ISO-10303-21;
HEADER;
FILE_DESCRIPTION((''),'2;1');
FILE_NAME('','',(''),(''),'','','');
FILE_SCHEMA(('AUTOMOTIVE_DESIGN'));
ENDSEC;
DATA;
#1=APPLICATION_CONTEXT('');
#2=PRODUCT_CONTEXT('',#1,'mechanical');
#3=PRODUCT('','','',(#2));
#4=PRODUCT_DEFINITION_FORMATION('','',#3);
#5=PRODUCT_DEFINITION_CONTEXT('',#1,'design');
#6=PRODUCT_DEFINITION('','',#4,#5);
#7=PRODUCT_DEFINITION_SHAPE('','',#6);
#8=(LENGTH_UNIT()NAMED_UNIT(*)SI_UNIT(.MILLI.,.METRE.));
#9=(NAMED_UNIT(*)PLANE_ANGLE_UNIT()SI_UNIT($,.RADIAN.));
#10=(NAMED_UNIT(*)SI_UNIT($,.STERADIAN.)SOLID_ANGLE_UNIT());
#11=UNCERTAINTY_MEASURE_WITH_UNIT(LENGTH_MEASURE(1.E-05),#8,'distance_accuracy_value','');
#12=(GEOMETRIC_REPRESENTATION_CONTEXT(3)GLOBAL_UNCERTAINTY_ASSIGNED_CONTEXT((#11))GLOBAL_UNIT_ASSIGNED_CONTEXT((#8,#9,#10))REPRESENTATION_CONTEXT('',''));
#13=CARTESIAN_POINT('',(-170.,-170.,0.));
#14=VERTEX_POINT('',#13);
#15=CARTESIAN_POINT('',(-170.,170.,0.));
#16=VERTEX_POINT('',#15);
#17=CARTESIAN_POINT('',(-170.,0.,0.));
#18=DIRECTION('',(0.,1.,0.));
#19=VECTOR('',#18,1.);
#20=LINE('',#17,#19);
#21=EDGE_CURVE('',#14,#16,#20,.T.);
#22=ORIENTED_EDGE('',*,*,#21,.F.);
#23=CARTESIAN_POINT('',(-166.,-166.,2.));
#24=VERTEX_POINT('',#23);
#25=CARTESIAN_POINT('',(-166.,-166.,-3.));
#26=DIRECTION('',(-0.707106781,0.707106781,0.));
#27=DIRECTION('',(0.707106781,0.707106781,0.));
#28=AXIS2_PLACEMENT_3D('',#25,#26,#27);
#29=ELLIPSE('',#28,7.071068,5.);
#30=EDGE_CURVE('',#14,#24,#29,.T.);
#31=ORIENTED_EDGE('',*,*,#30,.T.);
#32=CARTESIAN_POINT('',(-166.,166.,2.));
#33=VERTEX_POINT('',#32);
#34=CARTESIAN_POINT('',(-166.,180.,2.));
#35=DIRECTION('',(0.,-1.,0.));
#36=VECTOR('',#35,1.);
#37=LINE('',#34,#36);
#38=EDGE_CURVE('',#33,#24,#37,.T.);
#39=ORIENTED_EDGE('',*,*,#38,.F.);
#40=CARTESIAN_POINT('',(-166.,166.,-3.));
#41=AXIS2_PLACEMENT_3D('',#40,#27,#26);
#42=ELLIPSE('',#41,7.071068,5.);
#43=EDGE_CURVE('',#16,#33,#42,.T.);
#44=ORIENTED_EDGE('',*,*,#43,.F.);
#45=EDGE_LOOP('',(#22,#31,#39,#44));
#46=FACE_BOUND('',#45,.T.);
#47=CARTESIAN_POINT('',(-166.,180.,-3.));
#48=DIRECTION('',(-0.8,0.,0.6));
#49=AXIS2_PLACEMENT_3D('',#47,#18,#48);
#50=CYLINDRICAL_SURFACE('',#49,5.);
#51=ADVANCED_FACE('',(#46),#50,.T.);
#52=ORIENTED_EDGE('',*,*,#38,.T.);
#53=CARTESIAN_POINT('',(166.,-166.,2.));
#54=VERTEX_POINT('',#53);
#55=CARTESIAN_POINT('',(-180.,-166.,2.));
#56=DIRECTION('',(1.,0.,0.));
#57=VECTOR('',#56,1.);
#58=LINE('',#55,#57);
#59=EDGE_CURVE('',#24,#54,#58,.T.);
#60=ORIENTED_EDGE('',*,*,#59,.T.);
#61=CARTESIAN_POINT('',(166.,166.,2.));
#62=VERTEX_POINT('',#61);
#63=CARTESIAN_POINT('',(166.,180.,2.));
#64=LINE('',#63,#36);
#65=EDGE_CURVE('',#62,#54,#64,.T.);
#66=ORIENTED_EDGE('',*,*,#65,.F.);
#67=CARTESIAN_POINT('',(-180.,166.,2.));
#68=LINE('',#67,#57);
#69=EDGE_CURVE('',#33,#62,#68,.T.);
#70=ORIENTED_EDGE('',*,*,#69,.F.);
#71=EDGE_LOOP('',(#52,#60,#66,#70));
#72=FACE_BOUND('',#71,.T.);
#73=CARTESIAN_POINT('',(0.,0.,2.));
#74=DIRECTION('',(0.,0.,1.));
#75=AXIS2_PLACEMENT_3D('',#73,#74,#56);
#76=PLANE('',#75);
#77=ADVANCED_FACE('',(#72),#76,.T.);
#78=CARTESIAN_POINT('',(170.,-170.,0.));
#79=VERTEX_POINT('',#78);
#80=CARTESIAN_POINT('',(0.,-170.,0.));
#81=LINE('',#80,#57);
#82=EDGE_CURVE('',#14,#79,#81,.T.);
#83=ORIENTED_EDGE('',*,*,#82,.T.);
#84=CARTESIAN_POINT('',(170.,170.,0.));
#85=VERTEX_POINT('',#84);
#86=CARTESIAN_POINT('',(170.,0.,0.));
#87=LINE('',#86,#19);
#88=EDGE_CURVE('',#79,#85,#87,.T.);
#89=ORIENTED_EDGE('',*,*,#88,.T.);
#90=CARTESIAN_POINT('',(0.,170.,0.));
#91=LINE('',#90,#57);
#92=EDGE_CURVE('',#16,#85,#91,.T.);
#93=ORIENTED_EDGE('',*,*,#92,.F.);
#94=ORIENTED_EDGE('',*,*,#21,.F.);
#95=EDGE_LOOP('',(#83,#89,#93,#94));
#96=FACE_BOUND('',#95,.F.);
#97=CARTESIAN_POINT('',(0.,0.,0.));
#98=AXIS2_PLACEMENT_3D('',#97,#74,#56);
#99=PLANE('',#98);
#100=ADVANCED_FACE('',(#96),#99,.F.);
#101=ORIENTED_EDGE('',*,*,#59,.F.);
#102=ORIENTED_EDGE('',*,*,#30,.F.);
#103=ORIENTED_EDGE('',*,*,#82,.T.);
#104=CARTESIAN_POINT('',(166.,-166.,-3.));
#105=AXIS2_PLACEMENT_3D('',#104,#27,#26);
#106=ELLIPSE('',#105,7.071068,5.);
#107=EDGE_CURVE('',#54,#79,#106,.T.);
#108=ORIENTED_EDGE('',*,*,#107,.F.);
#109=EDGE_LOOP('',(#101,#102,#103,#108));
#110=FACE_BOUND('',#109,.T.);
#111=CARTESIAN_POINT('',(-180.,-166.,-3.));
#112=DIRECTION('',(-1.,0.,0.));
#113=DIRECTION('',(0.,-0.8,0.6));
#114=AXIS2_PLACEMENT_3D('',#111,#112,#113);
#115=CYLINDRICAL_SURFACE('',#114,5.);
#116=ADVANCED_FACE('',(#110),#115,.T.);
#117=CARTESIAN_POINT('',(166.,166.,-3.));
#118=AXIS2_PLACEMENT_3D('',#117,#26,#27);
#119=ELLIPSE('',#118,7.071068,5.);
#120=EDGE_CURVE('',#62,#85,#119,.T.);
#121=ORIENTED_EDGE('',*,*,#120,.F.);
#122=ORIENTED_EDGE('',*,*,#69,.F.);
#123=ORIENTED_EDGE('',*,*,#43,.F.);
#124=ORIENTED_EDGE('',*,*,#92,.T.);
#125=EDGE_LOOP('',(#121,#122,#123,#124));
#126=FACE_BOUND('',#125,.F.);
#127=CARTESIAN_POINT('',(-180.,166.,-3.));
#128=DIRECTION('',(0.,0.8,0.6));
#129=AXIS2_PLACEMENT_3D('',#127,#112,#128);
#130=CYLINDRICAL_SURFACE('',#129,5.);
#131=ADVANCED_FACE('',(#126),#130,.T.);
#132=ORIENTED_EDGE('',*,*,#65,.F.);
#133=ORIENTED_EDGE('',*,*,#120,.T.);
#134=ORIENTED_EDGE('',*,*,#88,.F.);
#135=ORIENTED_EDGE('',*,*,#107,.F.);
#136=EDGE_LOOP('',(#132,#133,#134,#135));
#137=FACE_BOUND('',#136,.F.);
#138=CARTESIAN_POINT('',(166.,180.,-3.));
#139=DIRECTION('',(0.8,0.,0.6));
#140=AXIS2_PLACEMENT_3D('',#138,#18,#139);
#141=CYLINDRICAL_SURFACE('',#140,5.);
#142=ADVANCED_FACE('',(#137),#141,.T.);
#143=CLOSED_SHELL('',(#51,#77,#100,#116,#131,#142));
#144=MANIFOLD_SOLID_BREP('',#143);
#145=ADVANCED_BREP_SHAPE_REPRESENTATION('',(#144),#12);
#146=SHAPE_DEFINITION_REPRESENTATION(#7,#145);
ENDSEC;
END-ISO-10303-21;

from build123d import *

# Parameters (mm, degrees)
F0_W        = 340
F0_H        = 340
F1_DEPTH    = 2
F2_T1_DEPTH = 360
F2_T3_DEPTH = 360


# Not quite as in the source:
# - a fillet or chamfer that OpenCascade refuses, or shapes differently, is made with other operations: its cross-section is extruded or revolved along the edge and cut away or added


with BuildPart() as f1:
    # F0 (on Top) → F1 (new body)
    with BuildSketch(Plane.XY):
        Rectangle(F0_W, F0_H)
    extrude(amount=F1_DEPTH)

    # F2: fillet of radius 5 on 4 edges, made by hand

    # F2_s2 → F2_t1 (cut)
    with BuildSketch(Plane.XZ.offset(-180)):
        with BuildLine():
            ThreePointArc((170, 0), (168.2360679775, 1.472135955), (166, 2))
            Line((166, 2), (170, 2))
            Line((170, 2), (170, 0))
        make_face()
        with BuildLine():
            ThreePointArc((-170, 0), (-168.2360679775, 1.472135955), (-166, 2))
            Line((-166, 2), (-170, 2))
            Line((-170, 2), (-170, 0))
        make_face()
    extrude(amount=F2_T1_DEPTH, mode=Mode.SUBTRACT)

    # F2_s4 → F2_t3 (cut)
    with BuildSketch(Plane.YZ.offset(-180)):
        with BuildLine():
            ThreePointArc((-170, 0), (-168.2360679775, 1.472135955), (-166, 2))
            Line((-166, 2), (-170, 2))
            Line((-170, 2), (-170, 0))
        make_face()
        with BuildLine():
            ThreePointArc((170, 0), (168.2360679775, 1.472135955), (166, 2))
            Line((166, 2), (170, 2))
            Line((170, 2), (170, 0))
        make_face()
    extrude(amount=F2_T3_DEPTH, mode=Mode.SUBTRACT)


solid = f1.part
